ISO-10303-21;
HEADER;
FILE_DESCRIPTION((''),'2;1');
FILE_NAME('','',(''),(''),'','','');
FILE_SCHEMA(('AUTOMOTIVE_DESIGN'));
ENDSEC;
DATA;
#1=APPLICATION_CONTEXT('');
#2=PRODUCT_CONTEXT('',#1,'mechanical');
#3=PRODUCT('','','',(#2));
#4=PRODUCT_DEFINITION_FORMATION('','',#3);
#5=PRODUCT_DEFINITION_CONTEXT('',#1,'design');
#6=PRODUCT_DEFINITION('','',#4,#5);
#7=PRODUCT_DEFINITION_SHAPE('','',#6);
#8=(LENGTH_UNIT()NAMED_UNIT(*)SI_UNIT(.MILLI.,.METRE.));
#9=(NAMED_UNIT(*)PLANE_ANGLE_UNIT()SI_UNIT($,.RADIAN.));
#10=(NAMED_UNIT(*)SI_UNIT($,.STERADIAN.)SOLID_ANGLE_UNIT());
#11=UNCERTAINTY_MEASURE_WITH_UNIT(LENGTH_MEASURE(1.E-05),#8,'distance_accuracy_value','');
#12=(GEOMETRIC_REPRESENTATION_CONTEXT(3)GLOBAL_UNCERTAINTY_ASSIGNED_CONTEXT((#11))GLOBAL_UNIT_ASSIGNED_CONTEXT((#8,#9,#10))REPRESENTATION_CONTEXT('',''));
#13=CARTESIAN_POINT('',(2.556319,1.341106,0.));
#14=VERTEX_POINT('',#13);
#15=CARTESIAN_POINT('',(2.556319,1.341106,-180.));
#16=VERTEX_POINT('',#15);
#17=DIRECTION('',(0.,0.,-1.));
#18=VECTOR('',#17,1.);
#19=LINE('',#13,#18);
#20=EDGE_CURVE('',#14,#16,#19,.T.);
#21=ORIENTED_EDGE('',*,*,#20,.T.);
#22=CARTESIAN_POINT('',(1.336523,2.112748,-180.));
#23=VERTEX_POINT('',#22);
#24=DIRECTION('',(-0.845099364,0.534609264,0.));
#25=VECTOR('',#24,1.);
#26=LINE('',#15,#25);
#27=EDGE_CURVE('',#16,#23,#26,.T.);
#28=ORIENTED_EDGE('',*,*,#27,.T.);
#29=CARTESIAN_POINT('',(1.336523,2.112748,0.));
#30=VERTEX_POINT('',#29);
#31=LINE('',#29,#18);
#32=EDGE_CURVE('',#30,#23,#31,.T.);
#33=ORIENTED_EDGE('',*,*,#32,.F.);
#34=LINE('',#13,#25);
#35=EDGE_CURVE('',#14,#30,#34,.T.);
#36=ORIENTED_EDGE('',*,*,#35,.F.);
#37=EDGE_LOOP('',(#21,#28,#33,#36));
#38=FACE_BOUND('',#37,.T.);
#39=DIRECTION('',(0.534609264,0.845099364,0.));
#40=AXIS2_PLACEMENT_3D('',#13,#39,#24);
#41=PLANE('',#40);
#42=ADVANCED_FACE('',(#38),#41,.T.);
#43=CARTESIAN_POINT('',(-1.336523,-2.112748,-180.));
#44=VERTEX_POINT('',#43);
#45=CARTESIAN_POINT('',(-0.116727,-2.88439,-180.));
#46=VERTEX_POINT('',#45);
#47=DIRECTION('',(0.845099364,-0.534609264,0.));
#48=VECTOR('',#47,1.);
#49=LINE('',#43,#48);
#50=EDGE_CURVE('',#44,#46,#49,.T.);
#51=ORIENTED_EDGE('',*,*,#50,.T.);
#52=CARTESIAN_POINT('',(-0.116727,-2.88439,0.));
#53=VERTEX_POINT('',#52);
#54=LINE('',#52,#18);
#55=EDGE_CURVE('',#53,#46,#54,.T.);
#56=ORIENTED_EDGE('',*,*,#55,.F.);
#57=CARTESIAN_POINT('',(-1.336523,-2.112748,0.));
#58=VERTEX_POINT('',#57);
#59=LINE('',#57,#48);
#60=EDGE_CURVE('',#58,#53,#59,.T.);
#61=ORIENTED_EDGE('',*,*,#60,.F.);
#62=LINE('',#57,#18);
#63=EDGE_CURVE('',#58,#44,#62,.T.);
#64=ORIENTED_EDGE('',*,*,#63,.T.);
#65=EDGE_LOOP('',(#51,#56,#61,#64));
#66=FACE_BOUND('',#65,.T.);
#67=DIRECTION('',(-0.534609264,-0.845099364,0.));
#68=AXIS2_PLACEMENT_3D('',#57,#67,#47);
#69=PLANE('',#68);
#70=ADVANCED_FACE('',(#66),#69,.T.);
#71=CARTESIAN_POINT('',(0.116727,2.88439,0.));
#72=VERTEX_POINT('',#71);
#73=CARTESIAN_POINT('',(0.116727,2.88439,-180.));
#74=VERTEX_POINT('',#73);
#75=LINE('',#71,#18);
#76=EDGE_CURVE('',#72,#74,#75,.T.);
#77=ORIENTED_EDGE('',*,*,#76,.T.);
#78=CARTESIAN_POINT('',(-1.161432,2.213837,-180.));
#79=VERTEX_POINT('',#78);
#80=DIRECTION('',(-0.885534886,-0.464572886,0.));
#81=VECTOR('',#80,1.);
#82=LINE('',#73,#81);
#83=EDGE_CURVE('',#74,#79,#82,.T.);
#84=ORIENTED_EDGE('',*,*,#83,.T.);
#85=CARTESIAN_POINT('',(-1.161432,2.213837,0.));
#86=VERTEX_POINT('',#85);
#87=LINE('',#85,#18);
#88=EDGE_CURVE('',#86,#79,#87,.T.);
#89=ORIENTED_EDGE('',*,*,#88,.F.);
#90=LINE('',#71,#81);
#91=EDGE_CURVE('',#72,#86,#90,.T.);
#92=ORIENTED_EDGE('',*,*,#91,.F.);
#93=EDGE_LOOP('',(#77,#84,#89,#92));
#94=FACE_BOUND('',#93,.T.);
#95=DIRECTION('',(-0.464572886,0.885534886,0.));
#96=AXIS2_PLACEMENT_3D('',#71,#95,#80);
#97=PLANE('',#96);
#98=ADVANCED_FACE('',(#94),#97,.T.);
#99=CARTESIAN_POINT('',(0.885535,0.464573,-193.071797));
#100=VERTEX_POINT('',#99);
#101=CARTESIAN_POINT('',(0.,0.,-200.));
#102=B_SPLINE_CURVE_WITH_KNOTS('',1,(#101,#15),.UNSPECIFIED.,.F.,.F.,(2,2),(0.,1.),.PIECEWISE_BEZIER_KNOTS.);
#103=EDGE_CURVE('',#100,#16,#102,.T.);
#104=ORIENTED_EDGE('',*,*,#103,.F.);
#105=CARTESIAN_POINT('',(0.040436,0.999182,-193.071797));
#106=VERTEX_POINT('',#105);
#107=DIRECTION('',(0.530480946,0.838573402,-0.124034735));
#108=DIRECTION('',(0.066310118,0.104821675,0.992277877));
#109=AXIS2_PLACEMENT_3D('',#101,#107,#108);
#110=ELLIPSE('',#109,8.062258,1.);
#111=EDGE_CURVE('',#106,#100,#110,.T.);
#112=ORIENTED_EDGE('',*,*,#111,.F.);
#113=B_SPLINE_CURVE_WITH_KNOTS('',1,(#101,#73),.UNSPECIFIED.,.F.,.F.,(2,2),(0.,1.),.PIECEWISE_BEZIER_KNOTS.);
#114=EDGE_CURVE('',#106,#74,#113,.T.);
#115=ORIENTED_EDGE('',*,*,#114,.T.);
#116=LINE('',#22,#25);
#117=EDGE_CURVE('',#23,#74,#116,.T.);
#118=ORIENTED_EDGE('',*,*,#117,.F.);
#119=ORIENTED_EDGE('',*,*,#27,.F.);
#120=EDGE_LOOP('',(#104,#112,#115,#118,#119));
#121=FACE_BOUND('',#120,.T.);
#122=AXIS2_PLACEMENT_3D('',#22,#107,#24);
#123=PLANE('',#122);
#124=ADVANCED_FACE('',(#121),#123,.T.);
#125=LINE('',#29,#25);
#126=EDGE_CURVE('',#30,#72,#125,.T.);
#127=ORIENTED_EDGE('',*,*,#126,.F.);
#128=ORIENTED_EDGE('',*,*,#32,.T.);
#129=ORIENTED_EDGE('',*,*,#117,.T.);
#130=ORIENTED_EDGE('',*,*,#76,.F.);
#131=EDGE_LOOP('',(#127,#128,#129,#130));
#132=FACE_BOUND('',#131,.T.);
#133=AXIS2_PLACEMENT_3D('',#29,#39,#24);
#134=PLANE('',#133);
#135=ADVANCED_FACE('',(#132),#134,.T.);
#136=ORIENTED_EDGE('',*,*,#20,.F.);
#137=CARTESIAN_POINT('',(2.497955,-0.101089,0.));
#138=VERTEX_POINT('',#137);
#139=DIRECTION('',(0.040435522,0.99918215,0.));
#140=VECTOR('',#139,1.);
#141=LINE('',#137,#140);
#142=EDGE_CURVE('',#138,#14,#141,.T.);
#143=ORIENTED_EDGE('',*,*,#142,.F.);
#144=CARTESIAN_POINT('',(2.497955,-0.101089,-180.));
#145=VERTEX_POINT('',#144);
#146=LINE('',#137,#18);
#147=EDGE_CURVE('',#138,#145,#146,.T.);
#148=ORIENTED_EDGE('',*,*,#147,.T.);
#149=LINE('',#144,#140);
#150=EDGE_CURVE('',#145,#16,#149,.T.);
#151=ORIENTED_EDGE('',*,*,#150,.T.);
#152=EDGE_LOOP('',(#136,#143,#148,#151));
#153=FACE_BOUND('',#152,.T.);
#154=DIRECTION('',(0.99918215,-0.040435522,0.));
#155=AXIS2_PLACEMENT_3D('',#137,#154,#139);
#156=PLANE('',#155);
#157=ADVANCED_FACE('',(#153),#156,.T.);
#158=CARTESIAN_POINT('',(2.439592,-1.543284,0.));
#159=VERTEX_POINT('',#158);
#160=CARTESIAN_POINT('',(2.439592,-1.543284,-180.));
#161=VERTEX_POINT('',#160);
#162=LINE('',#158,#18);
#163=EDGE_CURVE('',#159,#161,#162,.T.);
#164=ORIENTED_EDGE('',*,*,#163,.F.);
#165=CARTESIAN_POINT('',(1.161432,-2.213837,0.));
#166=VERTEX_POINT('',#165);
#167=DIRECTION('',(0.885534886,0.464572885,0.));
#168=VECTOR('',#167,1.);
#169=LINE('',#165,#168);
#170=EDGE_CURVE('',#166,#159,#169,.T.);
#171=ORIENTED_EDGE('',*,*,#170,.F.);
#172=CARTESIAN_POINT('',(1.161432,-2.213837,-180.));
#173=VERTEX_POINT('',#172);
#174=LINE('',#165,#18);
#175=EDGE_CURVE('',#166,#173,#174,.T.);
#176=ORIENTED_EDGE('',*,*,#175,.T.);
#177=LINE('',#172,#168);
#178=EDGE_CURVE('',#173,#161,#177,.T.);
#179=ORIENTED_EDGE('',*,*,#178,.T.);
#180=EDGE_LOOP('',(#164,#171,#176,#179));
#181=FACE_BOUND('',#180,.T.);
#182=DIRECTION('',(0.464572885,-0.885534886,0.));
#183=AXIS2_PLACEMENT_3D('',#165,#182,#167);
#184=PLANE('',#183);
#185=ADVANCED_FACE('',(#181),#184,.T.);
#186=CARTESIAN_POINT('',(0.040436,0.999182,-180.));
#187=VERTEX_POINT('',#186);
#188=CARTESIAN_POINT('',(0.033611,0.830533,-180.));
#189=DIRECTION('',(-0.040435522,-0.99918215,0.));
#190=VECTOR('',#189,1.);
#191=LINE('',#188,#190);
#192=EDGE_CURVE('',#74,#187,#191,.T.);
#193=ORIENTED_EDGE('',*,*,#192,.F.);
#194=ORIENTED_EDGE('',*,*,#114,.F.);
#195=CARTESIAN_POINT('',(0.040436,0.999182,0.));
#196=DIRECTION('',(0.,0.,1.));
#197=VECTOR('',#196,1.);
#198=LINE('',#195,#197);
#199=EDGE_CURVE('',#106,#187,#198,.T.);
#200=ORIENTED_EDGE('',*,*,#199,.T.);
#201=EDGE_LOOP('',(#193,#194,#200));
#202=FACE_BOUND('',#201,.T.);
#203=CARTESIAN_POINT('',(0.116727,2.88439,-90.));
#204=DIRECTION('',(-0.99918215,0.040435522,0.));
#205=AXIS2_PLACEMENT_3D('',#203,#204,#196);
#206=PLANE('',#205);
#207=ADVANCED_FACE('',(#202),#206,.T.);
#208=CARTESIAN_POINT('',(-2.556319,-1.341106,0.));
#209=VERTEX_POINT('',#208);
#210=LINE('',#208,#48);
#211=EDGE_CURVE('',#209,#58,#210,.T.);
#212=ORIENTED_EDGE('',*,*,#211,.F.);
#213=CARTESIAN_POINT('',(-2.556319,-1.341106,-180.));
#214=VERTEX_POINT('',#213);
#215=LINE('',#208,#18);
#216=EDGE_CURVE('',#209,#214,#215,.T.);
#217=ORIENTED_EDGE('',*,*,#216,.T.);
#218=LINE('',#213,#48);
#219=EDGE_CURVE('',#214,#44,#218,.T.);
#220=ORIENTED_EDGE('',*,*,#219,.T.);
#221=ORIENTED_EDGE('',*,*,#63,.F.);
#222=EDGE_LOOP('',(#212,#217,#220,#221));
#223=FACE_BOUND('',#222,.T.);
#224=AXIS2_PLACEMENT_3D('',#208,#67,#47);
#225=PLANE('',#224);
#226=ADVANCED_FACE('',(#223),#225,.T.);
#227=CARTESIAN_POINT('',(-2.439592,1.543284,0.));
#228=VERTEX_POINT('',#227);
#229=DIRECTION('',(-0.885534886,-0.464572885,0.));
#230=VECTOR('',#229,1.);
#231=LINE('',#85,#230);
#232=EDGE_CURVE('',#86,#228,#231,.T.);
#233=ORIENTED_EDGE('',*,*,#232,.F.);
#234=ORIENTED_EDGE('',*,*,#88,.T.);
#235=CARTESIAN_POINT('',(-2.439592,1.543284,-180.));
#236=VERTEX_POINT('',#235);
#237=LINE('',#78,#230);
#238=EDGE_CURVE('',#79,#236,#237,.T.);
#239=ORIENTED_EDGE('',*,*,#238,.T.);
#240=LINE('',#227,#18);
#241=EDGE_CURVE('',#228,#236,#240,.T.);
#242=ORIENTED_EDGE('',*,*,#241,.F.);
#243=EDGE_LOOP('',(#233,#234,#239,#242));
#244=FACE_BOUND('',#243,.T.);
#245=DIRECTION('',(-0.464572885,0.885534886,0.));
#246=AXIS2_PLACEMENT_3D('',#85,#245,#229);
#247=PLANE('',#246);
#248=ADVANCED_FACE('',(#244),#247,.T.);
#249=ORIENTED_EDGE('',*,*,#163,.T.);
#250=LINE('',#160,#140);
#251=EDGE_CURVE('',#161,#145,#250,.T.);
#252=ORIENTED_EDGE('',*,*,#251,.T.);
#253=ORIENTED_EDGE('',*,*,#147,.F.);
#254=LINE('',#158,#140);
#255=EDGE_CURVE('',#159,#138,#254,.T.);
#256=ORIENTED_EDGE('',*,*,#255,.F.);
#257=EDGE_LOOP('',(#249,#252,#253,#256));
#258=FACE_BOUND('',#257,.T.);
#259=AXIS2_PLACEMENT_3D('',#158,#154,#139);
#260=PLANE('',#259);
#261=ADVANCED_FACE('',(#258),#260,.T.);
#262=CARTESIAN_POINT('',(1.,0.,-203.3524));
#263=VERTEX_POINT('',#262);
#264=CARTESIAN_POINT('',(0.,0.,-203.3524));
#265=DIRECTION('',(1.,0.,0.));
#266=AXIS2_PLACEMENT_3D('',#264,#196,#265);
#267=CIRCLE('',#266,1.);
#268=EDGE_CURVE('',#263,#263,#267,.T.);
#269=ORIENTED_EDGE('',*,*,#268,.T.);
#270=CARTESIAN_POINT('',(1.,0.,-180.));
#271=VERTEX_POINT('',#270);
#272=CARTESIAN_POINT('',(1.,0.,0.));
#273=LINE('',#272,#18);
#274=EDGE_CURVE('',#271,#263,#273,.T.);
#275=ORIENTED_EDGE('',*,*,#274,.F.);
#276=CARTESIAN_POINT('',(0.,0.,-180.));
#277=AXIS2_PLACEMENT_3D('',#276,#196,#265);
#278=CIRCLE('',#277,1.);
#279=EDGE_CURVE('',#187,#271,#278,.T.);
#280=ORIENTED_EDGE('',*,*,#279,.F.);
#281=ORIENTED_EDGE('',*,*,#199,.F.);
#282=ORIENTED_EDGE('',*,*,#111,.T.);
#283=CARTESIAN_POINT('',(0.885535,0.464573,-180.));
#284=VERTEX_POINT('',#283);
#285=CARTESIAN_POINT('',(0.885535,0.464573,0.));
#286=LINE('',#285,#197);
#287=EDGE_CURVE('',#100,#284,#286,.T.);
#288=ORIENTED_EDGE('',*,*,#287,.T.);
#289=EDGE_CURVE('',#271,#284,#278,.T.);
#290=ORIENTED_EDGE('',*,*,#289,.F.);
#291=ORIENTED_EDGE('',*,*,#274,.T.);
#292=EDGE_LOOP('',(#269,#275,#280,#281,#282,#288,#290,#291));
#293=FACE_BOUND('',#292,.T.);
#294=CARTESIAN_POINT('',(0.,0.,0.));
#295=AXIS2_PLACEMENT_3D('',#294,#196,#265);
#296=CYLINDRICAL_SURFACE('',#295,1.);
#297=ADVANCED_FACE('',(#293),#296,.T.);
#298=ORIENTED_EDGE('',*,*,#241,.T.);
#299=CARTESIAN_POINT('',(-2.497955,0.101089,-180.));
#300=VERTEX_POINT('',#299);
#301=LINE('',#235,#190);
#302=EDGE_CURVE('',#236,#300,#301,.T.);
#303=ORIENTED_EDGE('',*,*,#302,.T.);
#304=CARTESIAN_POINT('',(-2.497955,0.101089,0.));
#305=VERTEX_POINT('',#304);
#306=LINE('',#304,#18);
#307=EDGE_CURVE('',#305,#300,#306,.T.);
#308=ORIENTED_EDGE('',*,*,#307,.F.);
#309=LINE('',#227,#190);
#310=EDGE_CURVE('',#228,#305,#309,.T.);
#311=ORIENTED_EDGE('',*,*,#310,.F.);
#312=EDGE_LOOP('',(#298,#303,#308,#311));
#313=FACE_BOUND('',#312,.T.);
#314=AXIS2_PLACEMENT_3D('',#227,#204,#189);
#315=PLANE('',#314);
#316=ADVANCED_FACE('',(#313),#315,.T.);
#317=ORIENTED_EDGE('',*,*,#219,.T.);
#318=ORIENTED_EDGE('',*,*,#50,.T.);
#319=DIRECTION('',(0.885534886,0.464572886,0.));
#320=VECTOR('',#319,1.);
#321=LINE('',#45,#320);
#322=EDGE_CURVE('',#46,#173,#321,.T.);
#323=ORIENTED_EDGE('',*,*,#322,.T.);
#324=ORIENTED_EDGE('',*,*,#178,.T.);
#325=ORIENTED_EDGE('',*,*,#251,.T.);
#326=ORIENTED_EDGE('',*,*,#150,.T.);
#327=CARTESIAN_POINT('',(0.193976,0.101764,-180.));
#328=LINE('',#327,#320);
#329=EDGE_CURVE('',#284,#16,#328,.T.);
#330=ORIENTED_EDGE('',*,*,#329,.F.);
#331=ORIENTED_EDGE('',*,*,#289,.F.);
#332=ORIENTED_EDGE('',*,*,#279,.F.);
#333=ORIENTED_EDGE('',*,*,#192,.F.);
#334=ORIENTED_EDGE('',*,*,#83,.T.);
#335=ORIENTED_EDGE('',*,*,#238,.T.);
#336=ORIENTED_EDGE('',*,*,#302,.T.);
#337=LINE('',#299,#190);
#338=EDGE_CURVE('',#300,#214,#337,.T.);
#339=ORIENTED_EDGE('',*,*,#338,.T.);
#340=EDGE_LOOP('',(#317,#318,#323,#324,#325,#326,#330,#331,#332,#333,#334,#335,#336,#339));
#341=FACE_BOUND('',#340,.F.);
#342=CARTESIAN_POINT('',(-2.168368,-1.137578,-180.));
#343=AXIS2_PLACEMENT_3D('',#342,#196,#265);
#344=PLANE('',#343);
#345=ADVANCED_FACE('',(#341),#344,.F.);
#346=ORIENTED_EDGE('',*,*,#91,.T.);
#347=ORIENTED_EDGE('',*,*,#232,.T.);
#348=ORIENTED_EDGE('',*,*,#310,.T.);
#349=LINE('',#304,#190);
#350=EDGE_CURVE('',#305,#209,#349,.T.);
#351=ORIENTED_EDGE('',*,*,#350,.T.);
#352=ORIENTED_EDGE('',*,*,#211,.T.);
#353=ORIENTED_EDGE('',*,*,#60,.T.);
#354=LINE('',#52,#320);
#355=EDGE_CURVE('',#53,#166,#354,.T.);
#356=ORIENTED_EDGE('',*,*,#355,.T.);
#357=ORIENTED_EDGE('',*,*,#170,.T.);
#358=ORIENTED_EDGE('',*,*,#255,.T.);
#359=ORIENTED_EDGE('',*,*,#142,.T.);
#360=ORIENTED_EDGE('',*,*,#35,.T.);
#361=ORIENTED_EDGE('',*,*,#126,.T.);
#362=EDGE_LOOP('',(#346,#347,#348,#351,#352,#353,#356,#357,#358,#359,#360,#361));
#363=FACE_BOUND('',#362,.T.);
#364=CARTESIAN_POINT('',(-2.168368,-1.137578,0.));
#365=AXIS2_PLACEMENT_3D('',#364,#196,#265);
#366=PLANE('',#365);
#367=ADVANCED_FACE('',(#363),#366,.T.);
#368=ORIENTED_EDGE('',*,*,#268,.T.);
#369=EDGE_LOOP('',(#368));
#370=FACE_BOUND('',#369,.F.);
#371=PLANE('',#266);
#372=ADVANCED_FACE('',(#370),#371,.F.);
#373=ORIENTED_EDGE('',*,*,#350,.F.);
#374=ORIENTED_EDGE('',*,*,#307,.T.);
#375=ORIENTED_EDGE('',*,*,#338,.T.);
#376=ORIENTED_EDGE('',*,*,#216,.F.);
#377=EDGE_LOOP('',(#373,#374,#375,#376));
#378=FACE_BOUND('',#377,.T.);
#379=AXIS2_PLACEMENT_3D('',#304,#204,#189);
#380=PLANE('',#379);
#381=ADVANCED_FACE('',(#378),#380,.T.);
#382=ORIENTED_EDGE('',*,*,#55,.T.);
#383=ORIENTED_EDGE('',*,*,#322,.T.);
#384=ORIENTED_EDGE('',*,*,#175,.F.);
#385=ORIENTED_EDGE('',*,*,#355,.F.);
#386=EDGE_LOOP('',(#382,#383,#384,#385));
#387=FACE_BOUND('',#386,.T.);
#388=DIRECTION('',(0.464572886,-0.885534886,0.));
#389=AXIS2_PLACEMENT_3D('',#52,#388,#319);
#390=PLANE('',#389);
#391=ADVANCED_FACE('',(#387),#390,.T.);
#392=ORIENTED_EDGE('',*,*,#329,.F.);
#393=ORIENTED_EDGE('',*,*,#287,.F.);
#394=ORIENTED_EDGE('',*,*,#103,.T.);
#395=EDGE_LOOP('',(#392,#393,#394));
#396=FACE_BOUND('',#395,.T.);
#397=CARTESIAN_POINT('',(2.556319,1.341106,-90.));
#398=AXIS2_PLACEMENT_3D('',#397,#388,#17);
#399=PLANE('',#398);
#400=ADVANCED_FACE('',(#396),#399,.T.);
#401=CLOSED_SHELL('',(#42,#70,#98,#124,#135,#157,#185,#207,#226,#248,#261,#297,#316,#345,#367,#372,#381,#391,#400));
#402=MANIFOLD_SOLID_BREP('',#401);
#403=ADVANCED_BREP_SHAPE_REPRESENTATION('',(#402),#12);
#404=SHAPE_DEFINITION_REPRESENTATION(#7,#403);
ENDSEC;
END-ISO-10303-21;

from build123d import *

# Parameters (mm, degrees)
F0_R      = 1
F1_DEPTH  = 180
F2_DEPTH  = 203.3524
F1_FACE_W = 2.8867513459
F1_FACE_H = 180


with BuildPart() as f1:
    # F0 (on Top) → F1 (new body)
    with BuildSketch(Plane.XY):
        with BuildLine():
            ThreePointArc((-1.3365232204, -2.1127483715), (-2.213837243, -1.1614321596), (-2.4979553725, 0.1010888571))
            Line((-2.4979553725, 0.1010888571), (-2.5563190236, -1.3411064025))
            Line((-2.5563190236, -1.3411064025), (-1.3365232204, -2.1127483715))
        make_face()
        with BuildLine():
            Line((-0.1167272981, -2.8843904159), (1.1614322324, -2.2138372048))
            ThreePointArc((1.1614322324, -2.2138372048), (-0.1010888301, -2.4979553736), (-1.3365232204, -2.1127483715))
            Line((-1.3365232204, -2.1127483715), (-0.1167272981, -2.8843904159))
        make_face()
        with BuildLine():
            ThreePointArc((-1.1614322324, 2.2138372048), (0.1010888127, 2.4979553743), (1.3365231909, 2.1127483902))
            Line((1.3365231909, 2.1127483902), (0.1167272981, 2.8843904159))
            Line((0.1167272981, 2.8843904159), (-1.1614322324, 2.2138372048))
        make_face()
        with BuildLine():
            ThreePointArc((-2.4979553725, 0.1010888571), (-2.112748401, 1.3365231738), (-1.1614322324, 2.2138372048))
            Line((-1.1614322324, 2.2138372048), (-2.4395917255, 1.5432840134))
            Line((-2.4395917255, 1.5432840134), (-2.4979553725, 0.1010888571))
        make_face()
        with BuildLine():
            Line((2.4395917255, -1.5432840134), (2.4979553754, -0.101088785))
            ThreePointArc((2.4979553754, -0.101088785), (2.1127484203, -1.3365231433), (1.1614322324, -2.2138372048))
            Line((1.1614322324, -2.2138372048), (2.4395917255, -1.5432840134))
        make_face()
        with BuildLine():
            ThreePointArc((1.3365231909, 2.1127483902), (2.1898981685, 1.2059626907), (2.5, 0))
            ThreePointArc((2.5, 0), (2.4994887916, -0.0505547301), (2.4979553754, -0.101088785))
            Line((2.4979553754, -0.101088785), (2.5563190236, 1.3411064025))
            Line((2.5563190236, 1.3411064025), (1.3365231909, 2.1127483902))
        make_face()
        with BuildLine():
            ThreePointArc((2.4979553754, -0.101088785), (2.4994887916, -0.0505547301), (2.5, 0))
            ThreePointArc((2.5, 0), (2.1898981685, 1.2059626907), (1.3365231909, 2.1127483902))
            ThreePointArc((1.3365231909, 2.1127483902), (0.1010888127, 2.4979553743), (-1.1614322324, 2.2138372048))
            ThreePointArc((-1.1614322324, 2.2138372048), (-2.112748401, 1.3365231738), (-2.4979553725, 0.1010888571))
            ThreePointArc((-2.4979553725, 0.1010888571), (-2.213837243, -1.1614321596), (-1.3365232204, -2.1127483715))
            ThreePointArc((-1.3365232204, -2.1127483715), (-0.1010888301, -2.4979553736), (1.1614322324, -2.2138372048))
            ThreePointArc((1.1614322324, -2.2138372048), (2.1127484203, -1.3365231433), (2.4979553754, -0.101088785))
        make_face()
        Circle(F0_R, mode=Mode.SUBTRACT)
    extrude(amount=-F1_DEPTH)

    # F0 (on Top) → F2 (join)
    with BuildSketch(Plane.XY):
        Circle(F0_R)
    extrude(amount=-F2_DEPTH)

    # F1_face (on face) → F5 section 0
    with BuildSketch(Plane(origin=(1.3365231609, 2.1127484092, -90), x_dir=(-0.8450993637, 0.5346092643, 0), z_dir=(0.5346092643, 0.8450993637, 0)), mode=Mode.PRIVATE) as f5_s0:
        Rectangle(F1_FACE_W, F1_FACE_H)
    loft([Vertex(0, 0, -200), f5_s0.sketch])


solid = f1.part
